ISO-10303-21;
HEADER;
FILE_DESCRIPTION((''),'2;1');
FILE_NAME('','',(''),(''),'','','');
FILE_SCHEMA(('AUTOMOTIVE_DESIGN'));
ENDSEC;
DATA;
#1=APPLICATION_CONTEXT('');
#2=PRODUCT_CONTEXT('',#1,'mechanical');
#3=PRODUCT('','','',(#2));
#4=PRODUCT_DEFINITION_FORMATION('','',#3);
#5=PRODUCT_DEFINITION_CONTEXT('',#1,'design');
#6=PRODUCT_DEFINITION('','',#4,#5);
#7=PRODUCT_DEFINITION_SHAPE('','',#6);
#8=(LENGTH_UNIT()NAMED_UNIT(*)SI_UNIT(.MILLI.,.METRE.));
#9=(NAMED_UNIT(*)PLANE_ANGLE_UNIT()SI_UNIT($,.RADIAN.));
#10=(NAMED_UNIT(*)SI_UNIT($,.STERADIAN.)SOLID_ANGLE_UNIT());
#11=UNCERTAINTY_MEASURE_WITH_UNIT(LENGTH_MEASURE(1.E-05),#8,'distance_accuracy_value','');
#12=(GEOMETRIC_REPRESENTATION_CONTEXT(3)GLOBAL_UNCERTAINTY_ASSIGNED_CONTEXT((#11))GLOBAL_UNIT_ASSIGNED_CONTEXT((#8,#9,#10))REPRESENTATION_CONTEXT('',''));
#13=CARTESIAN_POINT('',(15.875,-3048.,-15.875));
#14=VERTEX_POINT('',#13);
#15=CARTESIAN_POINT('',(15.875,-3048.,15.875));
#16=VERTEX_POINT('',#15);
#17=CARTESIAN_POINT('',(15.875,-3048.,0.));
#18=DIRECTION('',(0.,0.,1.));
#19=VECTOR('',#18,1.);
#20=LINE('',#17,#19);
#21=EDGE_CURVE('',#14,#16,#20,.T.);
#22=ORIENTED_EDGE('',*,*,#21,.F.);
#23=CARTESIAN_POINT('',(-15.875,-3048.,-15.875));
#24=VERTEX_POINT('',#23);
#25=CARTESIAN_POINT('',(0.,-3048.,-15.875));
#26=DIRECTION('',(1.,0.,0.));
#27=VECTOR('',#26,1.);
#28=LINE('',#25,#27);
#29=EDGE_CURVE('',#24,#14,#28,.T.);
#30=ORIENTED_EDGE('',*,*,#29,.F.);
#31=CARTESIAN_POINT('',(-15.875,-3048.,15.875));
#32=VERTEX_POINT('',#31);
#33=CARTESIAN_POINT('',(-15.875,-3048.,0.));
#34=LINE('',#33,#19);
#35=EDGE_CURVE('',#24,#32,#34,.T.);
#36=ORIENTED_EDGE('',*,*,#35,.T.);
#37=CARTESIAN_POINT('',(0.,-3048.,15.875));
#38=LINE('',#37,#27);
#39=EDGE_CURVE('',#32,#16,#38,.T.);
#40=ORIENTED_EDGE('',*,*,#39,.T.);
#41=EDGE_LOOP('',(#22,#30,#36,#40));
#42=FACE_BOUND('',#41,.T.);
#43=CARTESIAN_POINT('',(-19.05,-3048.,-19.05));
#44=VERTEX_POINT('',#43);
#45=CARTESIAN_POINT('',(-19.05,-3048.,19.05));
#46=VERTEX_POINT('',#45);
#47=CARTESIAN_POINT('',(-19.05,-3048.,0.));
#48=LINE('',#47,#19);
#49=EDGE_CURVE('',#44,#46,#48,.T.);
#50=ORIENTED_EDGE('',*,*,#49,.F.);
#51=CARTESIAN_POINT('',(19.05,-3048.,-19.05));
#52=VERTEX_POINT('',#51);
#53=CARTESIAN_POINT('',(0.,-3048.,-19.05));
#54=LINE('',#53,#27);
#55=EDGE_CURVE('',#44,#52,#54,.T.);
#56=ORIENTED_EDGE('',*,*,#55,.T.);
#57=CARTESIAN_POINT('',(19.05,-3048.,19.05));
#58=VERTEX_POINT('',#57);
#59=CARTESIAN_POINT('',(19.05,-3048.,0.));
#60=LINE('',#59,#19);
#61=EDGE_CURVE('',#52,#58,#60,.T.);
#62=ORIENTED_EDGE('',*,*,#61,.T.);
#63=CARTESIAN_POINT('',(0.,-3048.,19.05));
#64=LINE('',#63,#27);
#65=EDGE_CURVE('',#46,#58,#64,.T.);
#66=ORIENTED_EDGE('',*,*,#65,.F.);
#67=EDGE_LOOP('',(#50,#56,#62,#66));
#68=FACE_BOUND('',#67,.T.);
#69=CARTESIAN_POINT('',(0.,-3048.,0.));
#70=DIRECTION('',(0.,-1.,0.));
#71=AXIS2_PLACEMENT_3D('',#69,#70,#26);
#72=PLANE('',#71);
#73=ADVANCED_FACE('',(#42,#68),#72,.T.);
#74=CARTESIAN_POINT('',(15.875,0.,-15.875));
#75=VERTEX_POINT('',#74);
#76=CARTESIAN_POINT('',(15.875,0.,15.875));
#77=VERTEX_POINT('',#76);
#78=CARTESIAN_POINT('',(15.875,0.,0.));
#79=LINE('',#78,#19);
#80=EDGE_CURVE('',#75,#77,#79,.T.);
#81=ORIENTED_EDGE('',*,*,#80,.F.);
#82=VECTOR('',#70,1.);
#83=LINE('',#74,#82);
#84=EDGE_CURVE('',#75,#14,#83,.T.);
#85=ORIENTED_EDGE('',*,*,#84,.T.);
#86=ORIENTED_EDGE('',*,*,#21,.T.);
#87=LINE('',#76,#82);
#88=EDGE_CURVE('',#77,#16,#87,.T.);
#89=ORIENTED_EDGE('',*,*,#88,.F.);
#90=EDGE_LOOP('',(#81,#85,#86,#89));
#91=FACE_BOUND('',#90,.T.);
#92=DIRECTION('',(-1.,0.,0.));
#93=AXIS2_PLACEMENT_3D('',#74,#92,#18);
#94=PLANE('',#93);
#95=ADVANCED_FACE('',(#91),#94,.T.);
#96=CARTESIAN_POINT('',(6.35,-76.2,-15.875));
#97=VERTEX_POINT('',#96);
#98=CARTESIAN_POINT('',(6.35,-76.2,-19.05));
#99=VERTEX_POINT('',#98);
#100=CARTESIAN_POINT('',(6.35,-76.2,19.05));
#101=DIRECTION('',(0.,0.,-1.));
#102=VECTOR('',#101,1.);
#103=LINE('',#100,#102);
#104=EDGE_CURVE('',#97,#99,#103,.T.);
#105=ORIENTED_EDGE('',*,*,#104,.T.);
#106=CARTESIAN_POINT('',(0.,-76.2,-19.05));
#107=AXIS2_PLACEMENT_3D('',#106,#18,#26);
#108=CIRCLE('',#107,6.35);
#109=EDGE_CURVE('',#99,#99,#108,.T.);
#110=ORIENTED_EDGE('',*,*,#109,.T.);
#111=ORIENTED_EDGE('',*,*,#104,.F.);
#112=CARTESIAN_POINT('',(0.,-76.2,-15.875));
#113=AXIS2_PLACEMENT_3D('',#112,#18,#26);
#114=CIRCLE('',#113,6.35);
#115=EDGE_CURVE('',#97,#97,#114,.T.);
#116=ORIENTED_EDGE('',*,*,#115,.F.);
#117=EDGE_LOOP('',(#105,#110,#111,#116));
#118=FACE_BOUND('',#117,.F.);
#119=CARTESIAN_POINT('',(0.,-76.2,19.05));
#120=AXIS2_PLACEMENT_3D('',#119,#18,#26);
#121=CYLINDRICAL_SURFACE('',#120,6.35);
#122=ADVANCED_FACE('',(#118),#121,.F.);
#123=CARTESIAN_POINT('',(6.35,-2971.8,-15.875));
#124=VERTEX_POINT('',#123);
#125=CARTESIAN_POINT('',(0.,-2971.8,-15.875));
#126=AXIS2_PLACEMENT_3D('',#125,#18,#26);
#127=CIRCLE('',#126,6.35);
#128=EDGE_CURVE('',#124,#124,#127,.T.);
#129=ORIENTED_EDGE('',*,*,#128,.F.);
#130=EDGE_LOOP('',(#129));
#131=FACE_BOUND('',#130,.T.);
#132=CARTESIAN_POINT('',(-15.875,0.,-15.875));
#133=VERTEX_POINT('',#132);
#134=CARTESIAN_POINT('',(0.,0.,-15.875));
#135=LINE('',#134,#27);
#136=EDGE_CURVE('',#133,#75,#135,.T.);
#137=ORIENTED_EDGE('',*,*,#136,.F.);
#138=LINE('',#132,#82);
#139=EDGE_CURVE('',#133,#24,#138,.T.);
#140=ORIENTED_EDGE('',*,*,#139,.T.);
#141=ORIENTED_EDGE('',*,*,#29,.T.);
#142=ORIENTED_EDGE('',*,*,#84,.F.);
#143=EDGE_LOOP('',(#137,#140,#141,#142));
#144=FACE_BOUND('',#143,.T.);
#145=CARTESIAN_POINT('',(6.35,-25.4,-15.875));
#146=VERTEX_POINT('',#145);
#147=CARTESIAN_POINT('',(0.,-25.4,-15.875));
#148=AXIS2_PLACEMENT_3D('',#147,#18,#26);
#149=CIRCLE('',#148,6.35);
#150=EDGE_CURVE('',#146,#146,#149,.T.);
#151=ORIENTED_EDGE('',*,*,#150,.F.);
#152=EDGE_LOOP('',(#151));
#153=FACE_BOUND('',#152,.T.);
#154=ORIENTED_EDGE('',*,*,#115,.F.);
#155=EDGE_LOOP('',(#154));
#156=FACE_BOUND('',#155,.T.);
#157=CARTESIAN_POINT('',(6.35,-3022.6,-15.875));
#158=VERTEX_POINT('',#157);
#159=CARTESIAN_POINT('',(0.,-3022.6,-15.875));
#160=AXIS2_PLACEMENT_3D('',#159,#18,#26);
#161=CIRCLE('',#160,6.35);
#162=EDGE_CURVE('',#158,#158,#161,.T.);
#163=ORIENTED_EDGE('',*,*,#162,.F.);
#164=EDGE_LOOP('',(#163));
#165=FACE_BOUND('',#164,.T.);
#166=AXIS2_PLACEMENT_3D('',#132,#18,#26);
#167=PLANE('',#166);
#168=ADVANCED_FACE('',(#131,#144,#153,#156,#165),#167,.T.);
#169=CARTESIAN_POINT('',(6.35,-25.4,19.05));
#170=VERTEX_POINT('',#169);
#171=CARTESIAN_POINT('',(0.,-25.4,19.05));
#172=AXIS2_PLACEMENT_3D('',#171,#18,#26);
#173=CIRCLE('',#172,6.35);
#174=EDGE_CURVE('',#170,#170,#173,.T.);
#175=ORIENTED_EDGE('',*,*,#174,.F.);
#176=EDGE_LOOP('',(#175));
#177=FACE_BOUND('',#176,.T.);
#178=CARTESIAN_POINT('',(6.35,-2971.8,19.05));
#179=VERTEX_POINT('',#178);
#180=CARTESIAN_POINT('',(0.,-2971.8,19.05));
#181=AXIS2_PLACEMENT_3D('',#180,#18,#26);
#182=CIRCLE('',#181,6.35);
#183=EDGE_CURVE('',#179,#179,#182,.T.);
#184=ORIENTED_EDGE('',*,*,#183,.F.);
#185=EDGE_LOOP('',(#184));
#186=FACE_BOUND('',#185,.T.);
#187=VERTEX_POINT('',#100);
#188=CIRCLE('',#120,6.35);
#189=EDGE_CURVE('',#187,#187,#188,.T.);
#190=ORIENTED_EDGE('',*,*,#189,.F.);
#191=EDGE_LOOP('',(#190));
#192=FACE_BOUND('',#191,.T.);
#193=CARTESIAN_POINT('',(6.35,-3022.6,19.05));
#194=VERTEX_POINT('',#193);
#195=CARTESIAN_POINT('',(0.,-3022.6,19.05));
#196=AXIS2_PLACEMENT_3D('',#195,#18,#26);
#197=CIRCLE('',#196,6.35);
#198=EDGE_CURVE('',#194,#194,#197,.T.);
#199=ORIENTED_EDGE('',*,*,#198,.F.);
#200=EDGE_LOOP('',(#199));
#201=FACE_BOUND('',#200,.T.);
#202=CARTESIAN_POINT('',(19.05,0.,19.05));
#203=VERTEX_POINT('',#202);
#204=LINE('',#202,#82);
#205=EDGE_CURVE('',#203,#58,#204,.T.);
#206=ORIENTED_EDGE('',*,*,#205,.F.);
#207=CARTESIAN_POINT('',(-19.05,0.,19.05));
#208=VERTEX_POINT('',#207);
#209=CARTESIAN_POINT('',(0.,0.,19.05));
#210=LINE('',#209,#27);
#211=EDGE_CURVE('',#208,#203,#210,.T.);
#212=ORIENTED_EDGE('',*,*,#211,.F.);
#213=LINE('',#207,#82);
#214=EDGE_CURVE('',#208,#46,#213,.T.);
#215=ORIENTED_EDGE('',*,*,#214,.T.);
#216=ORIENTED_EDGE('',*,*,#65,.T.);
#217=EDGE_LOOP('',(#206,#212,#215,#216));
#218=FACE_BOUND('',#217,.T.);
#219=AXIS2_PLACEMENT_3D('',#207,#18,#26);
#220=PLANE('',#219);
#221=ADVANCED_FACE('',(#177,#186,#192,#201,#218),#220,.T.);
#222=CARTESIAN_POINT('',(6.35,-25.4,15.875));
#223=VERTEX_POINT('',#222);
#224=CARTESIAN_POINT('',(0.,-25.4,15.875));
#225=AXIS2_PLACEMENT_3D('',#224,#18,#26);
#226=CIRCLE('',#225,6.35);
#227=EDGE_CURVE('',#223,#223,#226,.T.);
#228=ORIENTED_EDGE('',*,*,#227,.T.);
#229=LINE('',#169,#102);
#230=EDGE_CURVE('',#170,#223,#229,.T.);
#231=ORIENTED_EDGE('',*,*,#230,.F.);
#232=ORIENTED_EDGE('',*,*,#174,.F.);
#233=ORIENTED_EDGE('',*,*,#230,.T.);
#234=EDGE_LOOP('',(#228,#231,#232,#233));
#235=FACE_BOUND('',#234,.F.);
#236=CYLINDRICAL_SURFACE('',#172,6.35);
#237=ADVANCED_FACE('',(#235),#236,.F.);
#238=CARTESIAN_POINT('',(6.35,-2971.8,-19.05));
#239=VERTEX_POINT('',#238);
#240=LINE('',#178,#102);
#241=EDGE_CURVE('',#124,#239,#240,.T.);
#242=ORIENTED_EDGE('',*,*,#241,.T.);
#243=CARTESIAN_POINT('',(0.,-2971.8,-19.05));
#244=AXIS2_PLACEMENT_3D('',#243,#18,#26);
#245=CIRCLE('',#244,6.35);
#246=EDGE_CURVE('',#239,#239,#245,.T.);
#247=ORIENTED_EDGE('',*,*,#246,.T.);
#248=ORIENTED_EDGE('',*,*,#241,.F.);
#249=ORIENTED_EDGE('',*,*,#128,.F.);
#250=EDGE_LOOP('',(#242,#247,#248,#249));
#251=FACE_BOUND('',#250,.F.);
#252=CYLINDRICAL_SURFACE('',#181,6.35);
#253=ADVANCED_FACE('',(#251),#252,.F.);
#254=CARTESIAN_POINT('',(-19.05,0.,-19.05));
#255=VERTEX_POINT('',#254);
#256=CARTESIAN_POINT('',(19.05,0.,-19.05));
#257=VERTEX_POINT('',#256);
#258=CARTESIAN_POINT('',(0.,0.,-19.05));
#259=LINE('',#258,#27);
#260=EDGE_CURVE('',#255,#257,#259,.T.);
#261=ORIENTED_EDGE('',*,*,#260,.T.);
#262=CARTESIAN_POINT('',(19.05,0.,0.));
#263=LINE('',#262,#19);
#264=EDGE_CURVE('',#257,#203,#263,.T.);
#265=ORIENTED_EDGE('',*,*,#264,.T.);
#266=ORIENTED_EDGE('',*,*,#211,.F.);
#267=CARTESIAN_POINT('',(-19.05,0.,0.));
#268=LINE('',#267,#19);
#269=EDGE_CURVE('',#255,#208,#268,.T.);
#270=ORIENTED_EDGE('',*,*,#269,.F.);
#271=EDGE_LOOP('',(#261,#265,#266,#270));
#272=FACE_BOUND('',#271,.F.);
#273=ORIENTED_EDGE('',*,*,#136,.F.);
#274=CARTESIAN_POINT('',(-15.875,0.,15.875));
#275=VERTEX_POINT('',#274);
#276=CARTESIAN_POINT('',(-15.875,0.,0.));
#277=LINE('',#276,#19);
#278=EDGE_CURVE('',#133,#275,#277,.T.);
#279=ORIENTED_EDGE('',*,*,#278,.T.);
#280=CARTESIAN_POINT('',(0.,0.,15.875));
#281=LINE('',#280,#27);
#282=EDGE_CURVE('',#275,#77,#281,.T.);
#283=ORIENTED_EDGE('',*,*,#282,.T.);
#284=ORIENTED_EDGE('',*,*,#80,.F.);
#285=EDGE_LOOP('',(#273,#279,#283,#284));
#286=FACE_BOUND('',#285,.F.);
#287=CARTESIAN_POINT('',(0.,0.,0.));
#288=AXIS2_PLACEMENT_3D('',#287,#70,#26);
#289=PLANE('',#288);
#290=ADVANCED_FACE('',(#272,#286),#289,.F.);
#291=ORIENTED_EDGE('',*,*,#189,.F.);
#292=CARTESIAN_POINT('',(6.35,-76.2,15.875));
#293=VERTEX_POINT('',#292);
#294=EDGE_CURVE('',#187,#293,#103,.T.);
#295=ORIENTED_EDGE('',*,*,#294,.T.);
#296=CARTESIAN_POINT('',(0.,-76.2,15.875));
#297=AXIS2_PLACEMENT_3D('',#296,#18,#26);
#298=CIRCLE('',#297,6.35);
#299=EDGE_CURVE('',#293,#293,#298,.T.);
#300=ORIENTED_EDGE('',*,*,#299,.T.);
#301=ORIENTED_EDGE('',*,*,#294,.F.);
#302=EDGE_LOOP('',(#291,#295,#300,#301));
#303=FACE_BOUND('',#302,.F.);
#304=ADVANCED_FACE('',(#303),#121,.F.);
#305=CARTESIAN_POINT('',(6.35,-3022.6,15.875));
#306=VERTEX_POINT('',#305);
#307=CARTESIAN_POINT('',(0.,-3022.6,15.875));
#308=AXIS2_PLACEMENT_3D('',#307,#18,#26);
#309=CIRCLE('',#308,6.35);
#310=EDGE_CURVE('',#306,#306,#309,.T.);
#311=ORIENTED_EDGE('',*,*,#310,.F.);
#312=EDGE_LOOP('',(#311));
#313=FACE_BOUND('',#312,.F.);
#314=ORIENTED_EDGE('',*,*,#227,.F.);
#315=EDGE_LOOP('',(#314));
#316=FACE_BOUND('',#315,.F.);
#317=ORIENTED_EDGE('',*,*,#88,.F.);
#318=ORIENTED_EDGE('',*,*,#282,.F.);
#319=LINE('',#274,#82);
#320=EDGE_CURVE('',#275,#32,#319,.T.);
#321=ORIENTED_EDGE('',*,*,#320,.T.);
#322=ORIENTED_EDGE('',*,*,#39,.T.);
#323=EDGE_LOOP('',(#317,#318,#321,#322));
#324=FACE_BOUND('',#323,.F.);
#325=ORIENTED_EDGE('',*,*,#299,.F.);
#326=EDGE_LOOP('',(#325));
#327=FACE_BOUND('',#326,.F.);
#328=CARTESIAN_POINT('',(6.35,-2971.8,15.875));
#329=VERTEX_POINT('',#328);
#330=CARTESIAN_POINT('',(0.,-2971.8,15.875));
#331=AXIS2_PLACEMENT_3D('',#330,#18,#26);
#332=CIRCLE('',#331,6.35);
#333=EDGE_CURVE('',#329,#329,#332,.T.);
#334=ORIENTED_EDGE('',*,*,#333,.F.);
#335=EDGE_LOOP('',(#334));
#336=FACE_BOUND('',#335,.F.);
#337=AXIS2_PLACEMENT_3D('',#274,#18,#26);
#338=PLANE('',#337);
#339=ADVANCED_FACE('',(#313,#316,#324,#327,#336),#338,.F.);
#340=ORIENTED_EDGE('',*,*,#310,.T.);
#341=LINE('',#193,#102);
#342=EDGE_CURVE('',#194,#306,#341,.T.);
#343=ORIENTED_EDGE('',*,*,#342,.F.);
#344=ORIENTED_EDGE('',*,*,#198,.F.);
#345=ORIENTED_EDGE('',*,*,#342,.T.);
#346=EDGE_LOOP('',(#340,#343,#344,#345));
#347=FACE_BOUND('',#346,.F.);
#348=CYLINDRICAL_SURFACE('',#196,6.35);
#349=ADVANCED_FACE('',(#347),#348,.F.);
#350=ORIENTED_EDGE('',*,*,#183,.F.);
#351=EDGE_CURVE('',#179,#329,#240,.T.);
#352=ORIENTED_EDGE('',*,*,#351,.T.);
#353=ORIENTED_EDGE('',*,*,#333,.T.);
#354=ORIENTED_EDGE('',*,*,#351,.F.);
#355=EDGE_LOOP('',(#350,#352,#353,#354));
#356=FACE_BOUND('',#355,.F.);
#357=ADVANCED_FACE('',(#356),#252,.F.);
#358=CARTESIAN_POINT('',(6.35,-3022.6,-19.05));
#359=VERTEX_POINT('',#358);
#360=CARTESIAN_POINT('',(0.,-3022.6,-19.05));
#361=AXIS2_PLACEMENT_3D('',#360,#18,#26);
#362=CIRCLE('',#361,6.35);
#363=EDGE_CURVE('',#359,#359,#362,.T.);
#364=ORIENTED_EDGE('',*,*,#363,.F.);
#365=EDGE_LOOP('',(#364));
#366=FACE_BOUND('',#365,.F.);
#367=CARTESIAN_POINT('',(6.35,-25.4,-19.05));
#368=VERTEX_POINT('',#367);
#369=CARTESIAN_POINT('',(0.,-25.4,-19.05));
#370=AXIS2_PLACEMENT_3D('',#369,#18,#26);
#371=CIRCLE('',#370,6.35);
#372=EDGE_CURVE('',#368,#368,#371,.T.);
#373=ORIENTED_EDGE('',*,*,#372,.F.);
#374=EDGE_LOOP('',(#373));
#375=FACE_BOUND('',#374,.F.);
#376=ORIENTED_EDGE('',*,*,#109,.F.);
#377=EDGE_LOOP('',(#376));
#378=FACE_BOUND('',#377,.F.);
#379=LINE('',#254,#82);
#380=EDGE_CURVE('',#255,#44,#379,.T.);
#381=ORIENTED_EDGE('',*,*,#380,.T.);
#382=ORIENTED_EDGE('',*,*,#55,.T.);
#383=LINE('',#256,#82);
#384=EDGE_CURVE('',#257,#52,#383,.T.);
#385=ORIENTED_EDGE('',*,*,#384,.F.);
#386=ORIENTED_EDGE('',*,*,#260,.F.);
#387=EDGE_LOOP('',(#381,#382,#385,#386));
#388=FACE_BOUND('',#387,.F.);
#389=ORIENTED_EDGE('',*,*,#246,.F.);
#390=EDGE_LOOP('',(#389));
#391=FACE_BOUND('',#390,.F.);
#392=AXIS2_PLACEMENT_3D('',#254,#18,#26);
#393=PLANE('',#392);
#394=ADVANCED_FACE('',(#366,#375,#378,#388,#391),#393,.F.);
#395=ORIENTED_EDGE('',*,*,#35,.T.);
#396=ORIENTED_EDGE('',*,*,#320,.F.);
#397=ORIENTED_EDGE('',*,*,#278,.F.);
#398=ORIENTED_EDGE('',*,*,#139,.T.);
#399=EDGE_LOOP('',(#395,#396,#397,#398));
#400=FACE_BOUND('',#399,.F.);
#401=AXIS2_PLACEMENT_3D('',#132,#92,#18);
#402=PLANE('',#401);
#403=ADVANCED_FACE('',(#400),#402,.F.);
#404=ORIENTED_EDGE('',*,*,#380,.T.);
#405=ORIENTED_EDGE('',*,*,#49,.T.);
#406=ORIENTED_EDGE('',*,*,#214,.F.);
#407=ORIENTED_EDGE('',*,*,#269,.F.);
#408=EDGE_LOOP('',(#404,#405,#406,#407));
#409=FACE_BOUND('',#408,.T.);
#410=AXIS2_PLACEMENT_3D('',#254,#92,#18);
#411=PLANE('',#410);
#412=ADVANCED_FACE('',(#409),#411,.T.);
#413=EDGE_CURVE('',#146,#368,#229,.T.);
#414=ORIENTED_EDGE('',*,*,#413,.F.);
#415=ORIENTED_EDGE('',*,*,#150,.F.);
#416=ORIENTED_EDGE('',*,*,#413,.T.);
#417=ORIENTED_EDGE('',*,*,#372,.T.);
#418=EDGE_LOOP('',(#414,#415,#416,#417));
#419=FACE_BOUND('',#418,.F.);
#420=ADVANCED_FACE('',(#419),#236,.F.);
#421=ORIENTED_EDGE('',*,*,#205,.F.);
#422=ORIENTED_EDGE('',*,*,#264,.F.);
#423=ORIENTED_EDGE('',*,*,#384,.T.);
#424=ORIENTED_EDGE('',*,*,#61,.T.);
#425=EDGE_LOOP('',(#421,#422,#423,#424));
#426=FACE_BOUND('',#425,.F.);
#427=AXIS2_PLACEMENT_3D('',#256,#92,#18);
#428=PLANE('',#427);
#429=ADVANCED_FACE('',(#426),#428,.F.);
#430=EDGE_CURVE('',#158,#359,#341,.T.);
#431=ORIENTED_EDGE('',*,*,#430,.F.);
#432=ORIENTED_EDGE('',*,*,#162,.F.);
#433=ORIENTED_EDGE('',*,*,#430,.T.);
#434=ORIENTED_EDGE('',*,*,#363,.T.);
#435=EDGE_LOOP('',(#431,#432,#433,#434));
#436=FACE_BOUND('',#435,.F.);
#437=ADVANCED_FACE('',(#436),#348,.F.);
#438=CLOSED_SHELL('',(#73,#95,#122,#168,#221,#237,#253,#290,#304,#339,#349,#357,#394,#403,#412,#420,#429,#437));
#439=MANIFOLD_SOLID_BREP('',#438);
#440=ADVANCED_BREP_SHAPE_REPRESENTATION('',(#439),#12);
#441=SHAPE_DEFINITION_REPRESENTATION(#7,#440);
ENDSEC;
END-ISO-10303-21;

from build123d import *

# Parameters (mm, degrees)
F0_W     = 38.1
F0_H     = 38.1
F0_W_2   = 31.75
F0_H_2   = 31.75
F1_DEPTH = 3048
F2_R     = 6.35
F3_DEPTH = 38.101


# Not quite as in the source:
# - a feature names something its author has since deleted; it is built from what else it names


with BuildPart() as f1:
    # F0 (on Front) → F1 (new body)
    with BuildSketch(Plane.XZ):
        Rectangle(F0_W, F0_H)
        Rectangle(F0_W_2, F0_H_2, mode=Mode.SUBTRACT)
    extrude(amount=F1_DEPTH)

    # F2 (on face) → F3 (cut, through all)
    with BuildSketch(Plane.XY.offset(19.05)):
        with Locations((0, -25.4)):
            Circle(F2_R)
        with Locations((0, -76.2)):
            Circle(F2_R)
        with Locations((0, -3022.6)):
            Circle(F2_R)
        with Locations((0, -2971.8)):
            Circle(F2_R)
    extrude(amount=-F3_DEPTH, mode=Mode.SUBTRACT)


solid = f1.part
